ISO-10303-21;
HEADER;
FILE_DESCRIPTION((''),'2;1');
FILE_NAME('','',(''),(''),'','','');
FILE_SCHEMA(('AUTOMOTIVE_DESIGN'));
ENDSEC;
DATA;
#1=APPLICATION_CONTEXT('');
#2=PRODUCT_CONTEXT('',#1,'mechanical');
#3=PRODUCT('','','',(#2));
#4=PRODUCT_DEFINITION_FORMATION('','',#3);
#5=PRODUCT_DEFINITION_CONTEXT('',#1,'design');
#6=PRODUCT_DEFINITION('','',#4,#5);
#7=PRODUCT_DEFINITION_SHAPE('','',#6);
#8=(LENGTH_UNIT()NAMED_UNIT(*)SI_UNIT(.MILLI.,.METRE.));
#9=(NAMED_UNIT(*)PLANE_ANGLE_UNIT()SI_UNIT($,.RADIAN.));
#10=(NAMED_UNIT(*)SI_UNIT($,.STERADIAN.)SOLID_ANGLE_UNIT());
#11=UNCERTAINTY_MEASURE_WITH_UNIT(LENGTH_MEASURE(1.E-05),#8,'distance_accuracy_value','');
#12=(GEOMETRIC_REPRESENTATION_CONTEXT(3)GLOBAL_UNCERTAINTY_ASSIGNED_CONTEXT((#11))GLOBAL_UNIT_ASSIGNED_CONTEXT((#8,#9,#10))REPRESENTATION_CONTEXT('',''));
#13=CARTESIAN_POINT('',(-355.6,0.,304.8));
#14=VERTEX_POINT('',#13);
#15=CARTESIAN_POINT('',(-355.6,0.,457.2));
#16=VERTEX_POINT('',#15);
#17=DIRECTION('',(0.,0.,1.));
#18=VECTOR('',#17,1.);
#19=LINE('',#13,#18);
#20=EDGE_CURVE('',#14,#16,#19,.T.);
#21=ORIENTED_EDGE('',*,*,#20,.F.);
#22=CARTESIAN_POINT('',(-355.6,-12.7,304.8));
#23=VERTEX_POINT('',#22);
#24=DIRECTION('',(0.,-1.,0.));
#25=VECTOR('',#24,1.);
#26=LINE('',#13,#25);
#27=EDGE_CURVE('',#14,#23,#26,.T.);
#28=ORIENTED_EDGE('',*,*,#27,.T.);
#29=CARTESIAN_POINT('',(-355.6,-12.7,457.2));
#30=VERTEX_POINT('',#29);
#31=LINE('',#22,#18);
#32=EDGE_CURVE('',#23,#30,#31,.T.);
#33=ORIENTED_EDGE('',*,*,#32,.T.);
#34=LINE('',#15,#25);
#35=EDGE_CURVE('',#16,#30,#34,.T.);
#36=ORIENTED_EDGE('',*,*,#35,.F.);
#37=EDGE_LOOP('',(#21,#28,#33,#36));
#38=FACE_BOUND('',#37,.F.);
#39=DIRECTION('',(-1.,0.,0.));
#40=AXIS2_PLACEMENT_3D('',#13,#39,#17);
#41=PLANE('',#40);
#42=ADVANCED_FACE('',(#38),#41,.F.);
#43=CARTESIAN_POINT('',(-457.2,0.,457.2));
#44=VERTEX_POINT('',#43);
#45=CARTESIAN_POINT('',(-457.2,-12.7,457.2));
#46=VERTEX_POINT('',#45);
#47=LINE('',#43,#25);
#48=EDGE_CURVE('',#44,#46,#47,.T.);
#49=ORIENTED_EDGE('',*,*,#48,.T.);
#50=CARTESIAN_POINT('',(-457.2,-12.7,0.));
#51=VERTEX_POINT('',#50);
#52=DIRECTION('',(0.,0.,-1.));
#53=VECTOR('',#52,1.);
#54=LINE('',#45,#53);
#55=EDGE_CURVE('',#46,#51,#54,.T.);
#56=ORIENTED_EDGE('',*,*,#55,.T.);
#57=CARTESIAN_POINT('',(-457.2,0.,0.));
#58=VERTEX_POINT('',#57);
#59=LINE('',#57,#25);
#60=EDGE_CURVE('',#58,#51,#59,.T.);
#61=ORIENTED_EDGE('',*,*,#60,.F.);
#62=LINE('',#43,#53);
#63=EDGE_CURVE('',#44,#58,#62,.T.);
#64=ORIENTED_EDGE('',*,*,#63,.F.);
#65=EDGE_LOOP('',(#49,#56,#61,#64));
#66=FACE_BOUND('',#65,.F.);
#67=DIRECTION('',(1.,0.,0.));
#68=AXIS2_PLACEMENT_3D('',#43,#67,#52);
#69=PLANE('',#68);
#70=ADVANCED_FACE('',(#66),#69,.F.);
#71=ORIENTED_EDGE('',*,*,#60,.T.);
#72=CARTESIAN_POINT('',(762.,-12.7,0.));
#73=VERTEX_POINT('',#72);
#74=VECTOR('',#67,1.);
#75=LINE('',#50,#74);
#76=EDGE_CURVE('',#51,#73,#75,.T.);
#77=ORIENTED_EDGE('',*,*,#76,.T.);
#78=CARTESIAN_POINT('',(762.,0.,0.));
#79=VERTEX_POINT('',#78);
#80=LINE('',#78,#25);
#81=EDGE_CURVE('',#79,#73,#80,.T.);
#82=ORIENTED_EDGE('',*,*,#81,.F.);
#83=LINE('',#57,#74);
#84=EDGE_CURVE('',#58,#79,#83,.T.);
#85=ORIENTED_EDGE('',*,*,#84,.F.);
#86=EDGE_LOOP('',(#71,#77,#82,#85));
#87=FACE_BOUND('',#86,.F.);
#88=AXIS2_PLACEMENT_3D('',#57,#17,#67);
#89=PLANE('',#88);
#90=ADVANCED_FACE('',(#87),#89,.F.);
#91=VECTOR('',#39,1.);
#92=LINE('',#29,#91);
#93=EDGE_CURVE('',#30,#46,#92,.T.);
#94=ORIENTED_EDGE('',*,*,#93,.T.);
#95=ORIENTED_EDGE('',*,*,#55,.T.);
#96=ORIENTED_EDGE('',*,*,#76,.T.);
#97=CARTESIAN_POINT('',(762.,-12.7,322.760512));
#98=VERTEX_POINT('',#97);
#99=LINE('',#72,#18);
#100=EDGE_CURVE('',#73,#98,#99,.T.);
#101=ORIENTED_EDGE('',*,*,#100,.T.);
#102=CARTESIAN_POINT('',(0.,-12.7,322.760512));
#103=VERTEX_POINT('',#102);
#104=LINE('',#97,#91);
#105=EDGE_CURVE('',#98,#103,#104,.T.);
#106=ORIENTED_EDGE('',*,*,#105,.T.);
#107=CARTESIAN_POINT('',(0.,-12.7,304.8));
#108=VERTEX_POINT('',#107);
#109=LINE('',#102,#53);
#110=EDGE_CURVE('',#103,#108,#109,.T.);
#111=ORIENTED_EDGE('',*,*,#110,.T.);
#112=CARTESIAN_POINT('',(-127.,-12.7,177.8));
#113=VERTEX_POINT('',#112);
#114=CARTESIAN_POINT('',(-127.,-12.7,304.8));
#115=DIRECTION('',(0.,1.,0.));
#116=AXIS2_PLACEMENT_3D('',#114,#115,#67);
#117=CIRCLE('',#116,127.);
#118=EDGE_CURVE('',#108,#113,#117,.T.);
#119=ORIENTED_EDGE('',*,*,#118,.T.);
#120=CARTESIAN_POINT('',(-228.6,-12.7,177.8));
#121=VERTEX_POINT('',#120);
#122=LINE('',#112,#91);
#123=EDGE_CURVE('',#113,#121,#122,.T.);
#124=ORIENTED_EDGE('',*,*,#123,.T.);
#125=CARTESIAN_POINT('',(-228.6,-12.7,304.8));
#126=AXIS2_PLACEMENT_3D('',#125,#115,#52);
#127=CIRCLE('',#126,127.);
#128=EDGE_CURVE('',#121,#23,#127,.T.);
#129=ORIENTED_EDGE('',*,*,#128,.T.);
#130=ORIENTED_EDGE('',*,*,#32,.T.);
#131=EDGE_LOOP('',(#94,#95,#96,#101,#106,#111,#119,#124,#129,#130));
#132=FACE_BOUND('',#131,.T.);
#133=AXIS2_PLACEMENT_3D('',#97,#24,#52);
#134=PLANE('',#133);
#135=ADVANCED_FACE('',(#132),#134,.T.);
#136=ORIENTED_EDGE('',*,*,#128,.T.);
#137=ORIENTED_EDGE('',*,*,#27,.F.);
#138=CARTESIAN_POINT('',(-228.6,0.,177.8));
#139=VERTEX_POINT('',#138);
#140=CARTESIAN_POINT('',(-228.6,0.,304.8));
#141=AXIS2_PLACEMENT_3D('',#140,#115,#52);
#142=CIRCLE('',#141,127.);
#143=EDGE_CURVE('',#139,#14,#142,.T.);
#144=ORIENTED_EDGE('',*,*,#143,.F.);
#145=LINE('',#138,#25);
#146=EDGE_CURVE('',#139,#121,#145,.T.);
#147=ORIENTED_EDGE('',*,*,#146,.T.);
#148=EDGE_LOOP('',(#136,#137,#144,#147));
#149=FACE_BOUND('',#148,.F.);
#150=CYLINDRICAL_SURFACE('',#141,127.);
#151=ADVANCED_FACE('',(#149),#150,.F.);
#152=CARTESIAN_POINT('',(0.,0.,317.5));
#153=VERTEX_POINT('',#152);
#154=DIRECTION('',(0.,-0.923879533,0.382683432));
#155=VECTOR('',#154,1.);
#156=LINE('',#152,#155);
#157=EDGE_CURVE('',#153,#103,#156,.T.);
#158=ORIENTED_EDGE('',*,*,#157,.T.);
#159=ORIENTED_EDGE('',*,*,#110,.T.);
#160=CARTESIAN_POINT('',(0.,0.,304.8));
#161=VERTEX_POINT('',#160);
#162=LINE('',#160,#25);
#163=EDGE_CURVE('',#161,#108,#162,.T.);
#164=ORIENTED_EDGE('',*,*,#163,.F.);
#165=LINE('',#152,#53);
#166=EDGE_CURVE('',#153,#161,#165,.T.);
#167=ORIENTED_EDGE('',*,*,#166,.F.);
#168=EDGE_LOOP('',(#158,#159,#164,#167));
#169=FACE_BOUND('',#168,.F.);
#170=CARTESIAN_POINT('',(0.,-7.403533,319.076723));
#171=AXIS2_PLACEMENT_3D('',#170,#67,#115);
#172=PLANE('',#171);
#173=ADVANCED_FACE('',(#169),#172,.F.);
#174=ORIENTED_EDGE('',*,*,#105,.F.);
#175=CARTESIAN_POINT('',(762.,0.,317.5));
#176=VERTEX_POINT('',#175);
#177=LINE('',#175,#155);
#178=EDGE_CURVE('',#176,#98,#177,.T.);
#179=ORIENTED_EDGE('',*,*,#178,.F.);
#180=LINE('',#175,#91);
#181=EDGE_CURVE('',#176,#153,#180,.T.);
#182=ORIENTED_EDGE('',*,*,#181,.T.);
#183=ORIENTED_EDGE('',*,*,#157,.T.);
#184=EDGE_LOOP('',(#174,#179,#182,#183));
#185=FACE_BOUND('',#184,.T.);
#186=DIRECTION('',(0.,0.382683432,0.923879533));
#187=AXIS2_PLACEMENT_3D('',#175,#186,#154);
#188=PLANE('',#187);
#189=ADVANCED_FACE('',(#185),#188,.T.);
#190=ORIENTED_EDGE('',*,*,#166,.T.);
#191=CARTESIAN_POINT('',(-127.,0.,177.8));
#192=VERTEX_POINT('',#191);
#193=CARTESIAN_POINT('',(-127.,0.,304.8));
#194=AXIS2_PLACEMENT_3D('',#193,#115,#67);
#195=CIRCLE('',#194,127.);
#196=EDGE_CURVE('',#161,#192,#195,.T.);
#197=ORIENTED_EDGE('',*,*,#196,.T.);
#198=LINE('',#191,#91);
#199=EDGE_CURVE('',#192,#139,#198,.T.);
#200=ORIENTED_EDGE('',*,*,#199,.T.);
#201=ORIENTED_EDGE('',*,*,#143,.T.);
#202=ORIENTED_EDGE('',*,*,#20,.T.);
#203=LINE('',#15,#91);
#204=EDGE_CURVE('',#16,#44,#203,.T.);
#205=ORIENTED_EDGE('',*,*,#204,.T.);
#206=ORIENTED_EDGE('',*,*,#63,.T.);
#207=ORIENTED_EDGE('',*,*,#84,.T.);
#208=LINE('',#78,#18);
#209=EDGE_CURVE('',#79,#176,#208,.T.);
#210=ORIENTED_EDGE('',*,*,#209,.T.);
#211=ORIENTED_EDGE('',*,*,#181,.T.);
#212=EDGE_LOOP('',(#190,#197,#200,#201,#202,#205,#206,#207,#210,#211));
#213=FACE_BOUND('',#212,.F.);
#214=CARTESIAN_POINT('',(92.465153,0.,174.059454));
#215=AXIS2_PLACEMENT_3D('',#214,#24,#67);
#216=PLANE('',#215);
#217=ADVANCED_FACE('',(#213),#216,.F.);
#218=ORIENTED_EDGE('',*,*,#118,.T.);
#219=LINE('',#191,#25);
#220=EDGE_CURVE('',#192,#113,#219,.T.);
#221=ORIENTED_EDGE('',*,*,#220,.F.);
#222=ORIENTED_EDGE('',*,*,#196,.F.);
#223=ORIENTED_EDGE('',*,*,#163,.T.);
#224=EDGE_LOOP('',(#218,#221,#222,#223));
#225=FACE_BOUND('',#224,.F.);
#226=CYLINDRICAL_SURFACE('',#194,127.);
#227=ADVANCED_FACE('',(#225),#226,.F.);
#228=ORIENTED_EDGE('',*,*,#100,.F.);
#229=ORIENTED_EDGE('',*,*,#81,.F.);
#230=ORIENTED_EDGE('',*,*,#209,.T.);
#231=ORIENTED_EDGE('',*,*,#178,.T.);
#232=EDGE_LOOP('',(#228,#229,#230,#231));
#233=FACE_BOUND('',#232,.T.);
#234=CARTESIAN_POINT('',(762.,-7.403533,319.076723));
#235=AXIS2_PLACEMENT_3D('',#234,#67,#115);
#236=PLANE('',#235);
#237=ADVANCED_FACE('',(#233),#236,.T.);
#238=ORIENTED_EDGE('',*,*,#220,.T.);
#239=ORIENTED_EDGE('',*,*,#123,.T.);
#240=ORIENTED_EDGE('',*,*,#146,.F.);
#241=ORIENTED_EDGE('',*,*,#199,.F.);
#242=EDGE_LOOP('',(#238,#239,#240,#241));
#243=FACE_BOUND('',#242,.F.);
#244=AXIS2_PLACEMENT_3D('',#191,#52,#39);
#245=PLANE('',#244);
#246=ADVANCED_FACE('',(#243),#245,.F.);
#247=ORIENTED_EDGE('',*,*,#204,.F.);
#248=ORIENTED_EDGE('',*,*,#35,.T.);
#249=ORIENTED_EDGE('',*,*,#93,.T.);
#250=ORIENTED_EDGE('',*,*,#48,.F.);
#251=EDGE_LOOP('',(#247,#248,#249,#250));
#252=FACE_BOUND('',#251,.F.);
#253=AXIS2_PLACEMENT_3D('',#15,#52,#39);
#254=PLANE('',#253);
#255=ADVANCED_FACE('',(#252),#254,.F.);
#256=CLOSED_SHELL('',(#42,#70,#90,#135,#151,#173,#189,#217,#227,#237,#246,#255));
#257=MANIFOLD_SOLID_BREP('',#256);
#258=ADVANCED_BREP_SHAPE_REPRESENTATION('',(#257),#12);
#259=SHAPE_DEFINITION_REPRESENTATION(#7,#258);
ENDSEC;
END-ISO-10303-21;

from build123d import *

# Parameters (mm, degrees)
F1_DEPTH = 12.7
F3_DEPTH = 762


# Not quite as in the source:
# - a feature names something its author has since deleted; it is built from what else it names


with BuildPart() as f1:
    # F0 (on Front) → F1 (new body)
    with BuildSketch(Plane.XZ):
        with BuildLine():
            Line((-457.2, 0), (0, 0))
            Line((0, 0), (762, 0))
            Line((762, 0), (762, 317.5))
            Line((762, 317.5), (0, 317.5))
            Line((0, 317.5), (0, 304.8))
            ThreePointArc((0, 304.8), (-37.1974387893, 214.9974387893), (-127, 177.8))
            Line((-127, 177.8), (-228.6, 177.8))
            ThreePointArc((-228.6, 177.8), (-318.4025612107, 214.9974387893), (-355.6, 304.8))
            Line((-355.6, 304.8), (-355.6, 457.2))
            Line((-355.6, 457.2), (-457.2, 457.2))
            Line((-457.2, 457.2), (-457.2, 0))
        make_face()
    extrude(amount=F1_DEPTH)

    # F2 (on face) → F3 (join, through all)
    with BuildSketch(Plane.YZ.offset(762)):
        Polygon((-12.7, 317.5), (0, 317.5), (-12.7, 322.7605122421), align=None)
    extrude(amount=-F3_DEPTH)


solid = f1.part
